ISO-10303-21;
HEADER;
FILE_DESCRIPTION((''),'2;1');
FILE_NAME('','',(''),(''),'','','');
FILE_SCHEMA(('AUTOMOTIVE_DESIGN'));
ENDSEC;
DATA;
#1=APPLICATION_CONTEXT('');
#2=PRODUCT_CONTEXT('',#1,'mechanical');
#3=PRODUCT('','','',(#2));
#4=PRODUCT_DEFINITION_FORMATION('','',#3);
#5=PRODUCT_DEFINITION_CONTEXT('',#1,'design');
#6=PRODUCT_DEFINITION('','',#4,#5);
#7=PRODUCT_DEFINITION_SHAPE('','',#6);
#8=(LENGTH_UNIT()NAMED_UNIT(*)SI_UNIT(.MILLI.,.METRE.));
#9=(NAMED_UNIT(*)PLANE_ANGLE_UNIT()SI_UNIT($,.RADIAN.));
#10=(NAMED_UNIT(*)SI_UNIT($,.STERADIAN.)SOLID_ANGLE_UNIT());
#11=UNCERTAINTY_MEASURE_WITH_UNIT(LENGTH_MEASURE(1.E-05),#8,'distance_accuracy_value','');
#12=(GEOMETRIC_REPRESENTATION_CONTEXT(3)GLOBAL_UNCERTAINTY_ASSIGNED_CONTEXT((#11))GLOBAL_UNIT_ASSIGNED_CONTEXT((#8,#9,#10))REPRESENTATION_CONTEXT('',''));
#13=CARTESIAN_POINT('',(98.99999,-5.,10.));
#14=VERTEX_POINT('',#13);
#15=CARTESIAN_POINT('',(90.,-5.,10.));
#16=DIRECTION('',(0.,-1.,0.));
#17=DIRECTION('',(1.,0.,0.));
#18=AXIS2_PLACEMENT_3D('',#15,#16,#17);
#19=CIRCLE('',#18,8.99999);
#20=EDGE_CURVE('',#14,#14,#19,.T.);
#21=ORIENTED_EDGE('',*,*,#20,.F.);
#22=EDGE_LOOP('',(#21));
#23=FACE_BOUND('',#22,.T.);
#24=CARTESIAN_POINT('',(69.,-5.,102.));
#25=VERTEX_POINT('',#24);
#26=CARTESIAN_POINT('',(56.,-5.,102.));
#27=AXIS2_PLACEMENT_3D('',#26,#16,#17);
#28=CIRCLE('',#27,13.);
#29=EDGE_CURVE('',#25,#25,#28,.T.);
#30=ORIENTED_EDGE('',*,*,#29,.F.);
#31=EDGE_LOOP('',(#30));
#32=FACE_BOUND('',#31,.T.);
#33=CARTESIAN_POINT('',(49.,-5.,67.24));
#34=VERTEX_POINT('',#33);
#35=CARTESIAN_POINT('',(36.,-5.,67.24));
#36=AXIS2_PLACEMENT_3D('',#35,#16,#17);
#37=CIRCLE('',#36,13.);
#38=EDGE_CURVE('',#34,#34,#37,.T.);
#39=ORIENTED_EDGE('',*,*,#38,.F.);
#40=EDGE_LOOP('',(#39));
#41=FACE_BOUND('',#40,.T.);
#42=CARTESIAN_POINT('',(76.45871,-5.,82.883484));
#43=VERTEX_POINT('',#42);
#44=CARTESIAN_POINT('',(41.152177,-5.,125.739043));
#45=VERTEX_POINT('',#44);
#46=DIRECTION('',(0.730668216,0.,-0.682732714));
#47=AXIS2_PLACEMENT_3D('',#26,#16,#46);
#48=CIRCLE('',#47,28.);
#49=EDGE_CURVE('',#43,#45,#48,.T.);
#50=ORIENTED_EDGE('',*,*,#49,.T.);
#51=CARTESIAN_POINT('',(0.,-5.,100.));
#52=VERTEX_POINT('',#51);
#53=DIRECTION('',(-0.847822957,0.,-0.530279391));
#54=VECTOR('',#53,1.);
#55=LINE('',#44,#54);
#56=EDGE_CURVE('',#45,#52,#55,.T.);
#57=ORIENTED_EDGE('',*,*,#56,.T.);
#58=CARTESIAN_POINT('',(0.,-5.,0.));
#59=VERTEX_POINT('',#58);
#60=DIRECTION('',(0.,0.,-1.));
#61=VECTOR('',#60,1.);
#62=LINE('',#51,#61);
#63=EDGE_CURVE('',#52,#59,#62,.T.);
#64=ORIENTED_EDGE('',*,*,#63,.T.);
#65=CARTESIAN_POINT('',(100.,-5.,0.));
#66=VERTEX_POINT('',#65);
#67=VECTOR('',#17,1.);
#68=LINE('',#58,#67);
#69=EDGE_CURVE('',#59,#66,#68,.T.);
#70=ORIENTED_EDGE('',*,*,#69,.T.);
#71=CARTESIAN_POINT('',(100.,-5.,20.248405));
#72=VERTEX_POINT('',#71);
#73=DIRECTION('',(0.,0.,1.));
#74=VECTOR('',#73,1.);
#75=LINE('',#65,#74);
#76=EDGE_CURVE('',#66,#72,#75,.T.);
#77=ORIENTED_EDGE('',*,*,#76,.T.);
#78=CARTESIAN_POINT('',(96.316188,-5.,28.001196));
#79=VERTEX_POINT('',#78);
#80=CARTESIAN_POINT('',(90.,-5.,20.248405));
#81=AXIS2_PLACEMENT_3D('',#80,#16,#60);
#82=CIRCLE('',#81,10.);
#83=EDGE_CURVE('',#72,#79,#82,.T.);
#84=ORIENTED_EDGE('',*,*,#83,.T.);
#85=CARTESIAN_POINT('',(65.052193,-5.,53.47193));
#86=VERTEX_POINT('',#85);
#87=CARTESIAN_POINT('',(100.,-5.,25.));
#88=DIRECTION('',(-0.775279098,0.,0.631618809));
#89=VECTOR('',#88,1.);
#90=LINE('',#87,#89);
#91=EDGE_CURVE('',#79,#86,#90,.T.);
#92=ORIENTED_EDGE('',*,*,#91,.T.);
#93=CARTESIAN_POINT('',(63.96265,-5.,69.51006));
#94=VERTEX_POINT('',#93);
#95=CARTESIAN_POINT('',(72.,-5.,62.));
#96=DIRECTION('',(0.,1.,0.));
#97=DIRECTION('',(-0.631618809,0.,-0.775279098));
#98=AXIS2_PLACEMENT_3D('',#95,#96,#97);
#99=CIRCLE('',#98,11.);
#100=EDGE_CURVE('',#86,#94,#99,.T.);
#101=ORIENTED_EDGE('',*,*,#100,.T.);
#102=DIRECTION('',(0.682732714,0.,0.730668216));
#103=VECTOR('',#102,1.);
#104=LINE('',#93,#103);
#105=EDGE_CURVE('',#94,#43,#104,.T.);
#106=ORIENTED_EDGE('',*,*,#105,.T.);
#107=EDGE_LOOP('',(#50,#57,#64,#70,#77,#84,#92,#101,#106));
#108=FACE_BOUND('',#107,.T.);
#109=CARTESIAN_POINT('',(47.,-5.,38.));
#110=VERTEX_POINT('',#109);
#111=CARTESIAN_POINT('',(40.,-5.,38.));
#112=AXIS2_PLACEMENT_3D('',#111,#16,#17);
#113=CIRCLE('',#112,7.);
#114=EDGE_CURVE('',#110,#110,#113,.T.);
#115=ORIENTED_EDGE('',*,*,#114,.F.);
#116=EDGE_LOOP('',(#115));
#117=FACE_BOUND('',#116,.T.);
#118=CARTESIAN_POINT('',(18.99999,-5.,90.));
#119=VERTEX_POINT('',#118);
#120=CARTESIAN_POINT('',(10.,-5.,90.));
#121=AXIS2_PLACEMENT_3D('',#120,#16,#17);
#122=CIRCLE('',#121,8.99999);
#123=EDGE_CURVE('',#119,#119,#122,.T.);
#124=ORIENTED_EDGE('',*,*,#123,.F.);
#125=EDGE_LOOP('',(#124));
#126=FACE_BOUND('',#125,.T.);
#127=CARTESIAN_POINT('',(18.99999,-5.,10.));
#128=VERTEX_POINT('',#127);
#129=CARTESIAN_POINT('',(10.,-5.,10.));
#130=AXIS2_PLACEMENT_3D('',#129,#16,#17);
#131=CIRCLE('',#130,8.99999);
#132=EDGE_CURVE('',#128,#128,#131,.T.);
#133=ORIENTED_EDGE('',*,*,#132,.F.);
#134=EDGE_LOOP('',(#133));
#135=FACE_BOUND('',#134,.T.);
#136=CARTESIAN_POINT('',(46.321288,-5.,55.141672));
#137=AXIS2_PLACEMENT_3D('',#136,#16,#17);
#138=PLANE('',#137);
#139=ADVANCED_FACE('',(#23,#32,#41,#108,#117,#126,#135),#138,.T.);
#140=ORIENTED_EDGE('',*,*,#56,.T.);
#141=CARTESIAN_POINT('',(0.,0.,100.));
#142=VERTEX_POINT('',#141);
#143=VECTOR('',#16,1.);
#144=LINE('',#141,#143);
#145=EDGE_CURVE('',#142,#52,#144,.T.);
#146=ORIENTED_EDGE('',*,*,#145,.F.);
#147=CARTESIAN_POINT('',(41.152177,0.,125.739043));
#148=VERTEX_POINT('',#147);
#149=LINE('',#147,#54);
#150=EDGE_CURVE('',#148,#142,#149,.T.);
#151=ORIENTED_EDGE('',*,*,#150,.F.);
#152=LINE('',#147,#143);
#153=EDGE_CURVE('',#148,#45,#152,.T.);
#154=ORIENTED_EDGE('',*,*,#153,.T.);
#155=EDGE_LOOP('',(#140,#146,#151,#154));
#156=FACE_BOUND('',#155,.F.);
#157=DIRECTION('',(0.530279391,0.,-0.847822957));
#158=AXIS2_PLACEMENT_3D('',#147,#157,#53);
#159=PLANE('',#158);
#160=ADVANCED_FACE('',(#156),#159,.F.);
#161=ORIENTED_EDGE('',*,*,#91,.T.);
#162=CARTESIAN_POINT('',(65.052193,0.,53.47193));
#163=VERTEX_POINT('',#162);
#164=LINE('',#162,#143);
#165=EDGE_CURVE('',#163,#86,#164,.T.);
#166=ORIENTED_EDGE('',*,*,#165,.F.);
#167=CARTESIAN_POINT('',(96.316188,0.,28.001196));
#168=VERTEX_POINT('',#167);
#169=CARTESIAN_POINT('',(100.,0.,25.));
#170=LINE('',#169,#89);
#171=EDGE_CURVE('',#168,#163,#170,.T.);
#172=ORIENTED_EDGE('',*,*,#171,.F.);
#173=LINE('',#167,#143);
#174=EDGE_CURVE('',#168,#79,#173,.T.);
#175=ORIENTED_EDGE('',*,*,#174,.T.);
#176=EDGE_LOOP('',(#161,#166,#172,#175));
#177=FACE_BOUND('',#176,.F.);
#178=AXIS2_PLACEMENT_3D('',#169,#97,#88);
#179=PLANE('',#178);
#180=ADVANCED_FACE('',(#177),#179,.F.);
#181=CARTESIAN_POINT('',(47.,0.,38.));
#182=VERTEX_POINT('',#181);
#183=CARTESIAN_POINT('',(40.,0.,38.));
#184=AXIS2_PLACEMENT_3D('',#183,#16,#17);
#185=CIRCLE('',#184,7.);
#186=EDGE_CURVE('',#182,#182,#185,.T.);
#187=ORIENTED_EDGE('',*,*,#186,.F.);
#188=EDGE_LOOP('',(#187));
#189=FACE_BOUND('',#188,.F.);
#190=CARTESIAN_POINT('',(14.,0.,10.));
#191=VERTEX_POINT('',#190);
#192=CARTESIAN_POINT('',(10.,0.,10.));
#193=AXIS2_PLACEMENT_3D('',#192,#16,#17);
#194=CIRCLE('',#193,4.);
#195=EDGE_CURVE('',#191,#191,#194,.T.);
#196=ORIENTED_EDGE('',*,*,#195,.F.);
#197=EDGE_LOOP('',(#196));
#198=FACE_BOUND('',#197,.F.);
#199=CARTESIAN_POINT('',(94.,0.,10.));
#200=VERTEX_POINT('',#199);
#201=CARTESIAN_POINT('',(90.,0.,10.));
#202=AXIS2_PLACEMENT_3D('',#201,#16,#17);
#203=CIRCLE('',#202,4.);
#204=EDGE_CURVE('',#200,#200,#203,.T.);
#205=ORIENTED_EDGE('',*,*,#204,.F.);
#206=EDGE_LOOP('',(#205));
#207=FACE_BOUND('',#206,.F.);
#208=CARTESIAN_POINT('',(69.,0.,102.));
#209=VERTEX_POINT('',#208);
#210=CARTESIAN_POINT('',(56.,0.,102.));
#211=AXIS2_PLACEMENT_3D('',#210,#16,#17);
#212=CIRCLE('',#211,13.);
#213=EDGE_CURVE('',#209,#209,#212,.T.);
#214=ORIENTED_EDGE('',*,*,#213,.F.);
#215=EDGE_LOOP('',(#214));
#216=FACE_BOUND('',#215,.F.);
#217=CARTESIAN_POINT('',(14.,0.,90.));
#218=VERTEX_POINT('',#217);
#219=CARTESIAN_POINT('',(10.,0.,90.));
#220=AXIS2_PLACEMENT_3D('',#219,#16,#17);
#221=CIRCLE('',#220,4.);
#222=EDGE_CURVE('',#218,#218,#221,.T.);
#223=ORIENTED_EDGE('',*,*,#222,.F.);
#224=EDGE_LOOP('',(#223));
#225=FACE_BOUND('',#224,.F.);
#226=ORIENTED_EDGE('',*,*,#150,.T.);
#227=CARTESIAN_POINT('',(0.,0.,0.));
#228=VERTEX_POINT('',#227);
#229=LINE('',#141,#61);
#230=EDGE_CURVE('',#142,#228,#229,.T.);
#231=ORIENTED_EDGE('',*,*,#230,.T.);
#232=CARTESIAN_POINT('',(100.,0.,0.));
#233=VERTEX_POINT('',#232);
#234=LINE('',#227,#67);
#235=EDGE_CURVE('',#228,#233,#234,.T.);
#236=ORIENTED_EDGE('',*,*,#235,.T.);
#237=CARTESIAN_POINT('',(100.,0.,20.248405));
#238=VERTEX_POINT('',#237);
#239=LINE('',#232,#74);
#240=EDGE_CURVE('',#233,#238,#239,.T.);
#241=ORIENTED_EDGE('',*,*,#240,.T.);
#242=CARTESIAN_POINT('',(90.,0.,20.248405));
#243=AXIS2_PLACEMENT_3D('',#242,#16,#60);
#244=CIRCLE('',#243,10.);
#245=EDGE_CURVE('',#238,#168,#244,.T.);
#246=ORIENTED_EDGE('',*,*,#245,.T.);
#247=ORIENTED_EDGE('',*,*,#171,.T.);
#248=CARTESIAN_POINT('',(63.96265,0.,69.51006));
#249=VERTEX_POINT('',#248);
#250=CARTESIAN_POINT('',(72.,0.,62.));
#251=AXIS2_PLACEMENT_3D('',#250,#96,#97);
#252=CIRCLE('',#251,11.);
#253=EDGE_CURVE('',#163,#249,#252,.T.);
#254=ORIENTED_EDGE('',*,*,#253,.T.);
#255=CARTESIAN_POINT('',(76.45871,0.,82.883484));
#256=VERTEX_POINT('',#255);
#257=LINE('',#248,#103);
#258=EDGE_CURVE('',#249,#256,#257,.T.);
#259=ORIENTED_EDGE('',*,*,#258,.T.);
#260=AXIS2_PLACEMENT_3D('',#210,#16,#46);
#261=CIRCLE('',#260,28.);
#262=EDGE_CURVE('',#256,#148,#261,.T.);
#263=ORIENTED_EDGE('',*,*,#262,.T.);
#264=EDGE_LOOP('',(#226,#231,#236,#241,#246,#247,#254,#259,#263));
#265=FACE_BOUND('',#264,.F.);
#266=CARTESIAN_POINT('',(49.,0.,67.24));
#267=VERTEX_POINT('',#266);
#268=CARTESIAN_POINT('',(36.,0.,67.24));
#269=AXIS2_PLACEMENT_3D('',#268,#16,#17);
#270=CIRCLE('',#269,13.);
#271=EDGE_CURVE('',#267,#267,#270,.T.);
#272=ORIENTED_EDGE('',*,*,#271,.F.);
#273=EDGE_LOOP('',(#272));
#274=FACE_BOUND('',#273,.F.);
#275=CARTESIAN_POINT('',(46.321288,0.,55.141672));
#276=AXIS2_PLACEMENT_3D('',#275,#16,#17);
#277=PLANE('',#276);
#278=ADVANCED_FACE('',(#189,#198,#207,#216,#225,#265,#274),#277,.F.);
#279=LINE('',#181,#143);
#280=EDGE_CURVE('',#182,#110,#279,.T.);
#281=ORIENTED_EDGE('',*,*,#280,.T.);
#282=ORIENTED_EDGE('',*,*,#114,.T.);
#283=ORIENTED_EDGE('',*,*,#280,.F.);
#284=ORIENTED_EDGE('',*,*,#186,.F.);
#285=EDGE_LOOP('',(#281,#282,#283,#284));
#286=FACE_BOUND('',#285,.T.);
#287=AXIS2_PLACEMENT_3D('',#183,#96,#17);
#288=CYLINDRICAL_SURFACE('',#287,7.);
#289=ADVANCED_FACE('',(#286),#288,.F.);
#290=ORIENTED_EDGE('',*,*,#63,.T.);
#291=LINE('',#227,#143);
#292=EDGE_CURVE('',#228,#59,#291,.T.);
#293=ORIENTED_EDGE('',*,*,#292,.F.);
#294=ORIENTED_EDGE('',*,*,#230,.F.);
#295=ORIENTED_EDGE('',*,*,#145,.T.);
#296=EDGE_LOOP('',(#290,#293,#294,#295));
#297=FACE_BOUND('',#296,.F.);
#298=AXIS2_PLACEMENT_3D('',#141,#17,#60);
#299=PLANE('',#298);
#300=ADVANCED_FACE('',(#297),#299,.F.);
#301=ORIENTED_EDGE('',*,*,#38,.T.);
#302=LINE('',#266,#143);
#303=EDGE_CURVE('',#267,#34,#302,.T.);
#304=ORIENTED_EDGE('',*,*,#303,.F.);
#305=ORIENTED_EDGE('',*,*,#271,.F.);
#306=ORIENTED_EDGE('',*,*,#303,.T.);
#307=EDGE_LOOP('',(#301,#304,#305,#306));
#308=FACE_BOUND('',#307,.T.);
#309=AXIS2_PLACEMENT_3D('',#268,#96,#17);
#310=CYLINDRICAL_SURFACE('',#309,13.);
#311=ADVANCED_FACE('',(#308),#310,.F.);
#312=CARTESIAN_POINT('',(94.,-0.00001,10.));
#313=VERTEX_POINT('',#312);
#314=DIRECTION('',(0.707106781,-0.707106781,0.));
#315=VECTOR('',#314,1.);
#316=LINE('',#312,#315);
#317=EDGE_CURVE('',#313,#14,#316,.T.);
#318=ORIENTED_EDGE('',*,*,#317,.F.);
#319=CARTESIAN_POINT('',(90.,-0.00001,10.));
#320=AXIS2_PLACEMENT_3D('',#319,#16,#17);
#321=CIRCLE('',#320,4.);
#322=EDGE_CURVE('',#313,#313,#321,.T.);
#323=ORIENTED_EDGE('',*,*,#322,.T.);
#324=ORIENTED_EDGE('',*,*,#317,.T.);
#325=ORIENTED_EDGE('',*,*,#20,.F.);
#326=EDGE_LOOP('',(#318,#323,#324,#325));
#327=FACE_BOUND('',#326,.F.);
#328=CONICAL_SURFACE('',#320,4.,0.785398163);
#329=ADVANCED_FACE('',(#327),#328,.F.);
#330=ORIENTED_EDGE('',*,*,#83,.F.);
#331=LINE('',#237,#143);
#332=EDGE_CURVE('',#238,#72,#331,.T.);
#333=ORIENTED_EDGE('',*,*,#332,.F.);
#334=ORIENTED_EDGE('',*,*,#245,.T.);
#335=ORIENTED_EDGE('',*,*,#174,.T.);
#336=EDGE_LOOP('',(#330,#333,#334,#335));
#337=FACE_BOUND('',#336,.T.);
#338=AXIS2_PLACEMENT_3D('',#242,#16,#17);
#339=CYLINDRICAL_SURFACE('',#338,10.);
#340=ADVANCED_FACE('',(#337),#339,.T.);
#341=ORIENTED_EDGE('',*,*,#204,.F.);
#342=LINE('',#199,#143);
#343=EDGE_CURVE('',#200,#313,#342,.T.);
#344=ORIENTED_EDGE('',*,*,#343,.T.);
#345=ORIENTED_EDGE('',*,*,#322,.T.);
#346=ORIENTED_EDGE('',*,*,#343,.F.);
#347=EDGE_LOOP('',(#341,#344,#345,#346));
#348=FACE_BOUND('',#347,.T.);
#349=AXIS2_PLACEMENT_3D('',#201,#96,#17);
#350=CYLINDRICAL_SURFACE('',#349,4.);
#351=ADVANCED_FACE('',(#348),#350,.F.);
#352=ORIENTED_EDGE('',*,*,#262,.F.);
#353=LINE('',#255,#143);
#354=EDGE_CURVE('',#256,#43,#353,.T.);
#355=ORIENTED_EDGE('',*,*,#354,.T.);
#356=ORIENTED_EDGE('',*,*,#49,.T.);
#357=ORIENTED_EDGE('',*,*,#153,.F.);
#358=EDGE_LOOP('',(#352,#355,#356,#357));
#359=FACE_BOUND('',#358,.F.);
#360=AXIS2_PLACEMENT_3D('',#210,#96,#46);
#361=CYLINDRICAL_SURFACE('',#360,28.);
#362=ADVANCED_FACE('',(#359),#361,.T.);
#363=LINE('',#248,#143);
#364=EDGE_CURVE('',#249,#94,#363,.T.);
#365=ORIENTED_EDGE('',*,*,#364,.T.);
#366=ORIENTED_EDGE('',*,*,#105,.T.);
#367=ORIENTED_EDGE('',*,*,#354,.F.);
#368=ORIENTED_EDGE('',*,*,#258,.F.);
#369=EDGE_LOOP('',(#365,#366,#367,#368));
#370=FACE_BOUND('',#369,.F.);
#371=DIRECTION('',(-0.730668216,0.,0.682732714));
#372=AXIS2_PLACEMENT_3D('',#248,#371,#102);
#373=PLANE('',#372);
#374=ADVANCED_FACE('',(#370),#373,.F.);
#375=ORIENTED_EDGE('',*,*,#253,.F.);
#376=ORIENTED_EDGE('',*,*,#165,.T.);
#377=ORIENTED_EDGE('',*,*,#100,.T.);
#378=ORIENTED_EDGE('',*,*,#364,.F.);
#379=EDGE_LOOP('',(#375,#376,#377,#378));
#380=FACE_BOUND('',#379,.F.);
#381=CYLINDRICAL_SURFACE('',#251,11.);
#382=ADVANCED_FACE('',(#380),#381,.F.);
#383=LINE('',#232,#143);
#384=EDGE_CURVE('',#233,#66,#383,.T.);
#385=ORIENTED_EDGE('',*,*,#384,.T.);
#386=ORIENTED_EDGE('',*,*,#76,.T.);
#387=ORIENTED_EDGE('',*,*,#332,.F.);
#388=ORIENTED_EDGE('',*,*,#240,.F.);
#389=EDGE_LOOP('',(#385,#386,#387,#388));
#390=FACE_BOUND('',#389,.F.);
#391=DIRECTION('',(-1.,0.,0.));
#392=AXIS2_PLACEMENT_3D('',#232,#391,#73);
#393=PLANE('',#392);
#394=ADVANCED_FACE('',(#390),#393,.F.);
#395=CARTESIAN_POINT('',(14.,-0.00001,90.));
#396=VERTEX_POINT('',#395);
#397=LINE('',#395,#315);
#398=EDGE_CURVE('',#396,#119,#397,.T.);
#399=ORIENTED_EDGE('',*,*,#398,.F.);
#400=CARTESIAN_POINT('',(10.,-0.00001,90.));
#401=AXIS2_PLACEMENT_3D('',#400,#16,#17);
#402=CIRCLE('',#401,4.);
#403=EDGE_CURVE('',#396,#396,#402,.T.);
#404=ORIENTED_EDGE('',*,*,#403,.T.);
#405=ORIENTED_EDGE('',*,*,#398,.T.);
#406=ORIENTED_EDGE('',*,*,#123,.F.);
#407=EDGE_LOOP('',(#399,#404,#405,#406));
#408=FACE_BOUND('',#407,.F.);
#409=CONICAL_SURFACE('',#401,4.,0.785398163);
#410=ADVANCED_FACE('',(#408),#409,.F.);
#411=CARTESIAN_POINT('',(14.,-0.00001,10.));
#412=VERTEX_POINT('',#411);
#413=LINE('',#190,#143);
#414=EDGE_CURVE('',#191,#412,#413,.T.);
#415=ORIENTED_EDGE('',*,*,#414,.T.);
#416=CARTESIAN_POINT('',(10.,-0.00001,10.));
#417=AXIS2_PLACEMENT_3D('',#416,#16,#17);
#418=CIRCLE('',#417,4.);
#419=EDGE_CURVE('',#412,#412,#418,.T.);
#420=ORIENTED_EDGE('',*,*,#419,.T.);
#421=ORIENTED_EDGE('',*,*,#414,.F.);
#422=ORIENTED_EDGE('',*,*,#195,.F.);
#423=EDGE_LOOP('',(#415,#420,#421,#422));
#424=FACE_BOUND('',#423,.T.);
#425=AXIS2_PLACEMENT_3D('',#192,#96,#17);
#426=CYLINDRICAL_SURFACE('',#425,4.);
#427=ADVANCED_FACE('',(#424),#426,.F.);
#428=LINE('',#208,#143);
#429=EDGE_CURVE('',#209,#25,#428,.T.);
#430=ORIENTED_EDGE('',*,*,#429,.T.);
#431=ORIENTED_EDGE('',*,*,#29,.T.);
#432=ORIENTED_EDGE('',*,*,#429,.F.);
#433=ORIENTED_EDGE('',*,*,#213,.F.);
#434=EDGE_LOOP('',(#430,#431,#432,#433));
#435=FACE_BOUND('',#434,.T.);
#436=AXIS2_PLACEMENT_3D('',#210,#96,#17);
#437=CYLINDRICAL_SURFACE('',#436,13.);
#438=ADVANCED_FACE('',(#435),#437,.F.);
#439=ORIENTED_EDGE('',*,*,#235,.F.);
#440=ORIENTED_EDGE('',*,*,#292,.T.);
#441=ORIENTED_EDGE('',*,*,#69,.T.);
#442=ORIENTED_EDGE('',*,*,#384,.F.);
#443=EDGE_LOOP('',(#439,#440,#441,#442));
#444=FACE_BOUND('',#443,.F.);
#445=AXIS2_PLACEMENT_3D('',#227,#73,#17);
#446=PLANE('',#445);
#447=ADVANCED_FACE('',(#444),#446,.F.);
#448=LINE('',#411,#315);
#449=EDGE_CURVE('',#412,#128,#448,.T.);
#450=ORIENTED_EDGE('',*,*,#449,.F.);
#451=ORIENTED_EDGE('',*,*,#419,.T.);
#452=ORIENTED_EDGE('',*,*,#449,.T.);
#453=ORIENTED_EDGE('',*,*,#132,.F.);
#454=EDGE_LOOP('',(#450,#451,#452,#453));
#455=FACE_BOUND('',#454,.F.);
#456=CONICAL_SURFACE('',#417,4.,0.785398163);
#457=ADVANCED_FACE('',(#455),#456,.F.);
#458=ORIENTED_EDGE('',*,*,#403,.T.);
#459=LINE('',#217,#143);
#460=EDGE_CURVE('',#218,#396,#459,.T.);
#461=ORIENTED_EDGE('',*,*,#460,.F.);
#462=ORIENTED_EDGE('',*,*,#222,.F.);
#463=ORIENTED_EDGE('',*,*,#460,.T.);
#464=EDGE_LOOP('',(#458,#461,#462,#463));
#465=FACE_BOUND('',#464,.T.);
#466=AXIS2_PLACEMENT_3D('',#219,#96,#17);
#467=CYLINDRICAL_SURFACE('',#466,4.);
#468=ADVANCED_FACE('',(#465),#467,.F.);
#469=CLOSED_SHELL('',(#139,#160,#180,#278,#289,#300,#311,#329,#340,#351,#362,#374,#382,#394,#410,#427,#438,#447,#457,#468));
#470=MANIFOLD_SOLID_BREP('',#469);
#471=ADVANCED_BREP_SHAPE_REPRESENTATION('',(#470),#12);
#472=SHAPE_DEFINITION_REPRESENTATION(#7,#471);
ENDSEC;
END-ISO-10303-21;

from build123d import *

# Parameters (mm, degrees)
F0_R     = 4
F0_R_2   = 7
F0_R_3   = 13
F1_DEPTH = 5
F2_SIZE  = 4.99999
F3_R     = 10


# Not quite as in the source:
# - a fillet or chamfer is up to 0.001 mm smaller than in the source, because OpenCascade refuses the exact size


with BuildPart() as f1:
    # F0 (on Front) → F1 (new body)
    with BuildSketch(Plane.XZ):
        with BuildLine():
            Line((0, 100), (0, 0))
            Line((0, 0), (100, 0))
            Line((100, 0), (100, 25))
            Line((100, 25), (65.0521931045, 53.4719299169))
            ThreePointArc((65.0521931045, 53.4719299169), (61.0252955601, 61.2544381602), (63.9626496251, 69.51005985))
            Line((63.9626496251, 69.51005985), (76.4587100452, 82.8834840181))
            ThreePointArc((76.4587100452, 82.8834840181), (77.6106511533, 119.803925318), (41.1521770426, 125.7390428077))
            Line((41.1521770426, 125.7390428077), (0, 100))
        make_face()
        with Locations((10, 10)):
            Circle(F0_R, mode=Mode.SUBTRACT)
        with Locations((40, 38)):
            Circle(F0_R_2, mode=Mode.SUBTRACT)
        with Locations((90, 10)):
            Circle(F0_R, mode=Mode.SUBTRACT)
        with Locations((10, 90)):
            Circle(F0_R, mode=Mode.SUBTRACT)
        with Locations((36, 67.24)):
            Circle(F0_R_3, mode=Mode.SUBTRACT)
        with Locations((56, 102)):
            Circle(F0_R_3, mode=Mode.SUBTRACT)
    extrude(amount=F1_DEPTH)

    # F2 (size 5 in the source; OpenCascade refuses exactly that, so slightly less here)
    f2_edges = [f1.edges().sort_by_distance(p)[0] for p in [
        (6, -5, 10),
        (86, -5, 10),
        (6, -5, 90),
    ]]
    chamfer(f2_edges, length=F2_SIZE)

    # F3
    f3_edges = [f1.edges().sort_by_distance(p)[0] for p in [
        (100, -2.5, 25),
    ]]
    fillet(f3_edges, radius=F3_R)


solid = f1.part
